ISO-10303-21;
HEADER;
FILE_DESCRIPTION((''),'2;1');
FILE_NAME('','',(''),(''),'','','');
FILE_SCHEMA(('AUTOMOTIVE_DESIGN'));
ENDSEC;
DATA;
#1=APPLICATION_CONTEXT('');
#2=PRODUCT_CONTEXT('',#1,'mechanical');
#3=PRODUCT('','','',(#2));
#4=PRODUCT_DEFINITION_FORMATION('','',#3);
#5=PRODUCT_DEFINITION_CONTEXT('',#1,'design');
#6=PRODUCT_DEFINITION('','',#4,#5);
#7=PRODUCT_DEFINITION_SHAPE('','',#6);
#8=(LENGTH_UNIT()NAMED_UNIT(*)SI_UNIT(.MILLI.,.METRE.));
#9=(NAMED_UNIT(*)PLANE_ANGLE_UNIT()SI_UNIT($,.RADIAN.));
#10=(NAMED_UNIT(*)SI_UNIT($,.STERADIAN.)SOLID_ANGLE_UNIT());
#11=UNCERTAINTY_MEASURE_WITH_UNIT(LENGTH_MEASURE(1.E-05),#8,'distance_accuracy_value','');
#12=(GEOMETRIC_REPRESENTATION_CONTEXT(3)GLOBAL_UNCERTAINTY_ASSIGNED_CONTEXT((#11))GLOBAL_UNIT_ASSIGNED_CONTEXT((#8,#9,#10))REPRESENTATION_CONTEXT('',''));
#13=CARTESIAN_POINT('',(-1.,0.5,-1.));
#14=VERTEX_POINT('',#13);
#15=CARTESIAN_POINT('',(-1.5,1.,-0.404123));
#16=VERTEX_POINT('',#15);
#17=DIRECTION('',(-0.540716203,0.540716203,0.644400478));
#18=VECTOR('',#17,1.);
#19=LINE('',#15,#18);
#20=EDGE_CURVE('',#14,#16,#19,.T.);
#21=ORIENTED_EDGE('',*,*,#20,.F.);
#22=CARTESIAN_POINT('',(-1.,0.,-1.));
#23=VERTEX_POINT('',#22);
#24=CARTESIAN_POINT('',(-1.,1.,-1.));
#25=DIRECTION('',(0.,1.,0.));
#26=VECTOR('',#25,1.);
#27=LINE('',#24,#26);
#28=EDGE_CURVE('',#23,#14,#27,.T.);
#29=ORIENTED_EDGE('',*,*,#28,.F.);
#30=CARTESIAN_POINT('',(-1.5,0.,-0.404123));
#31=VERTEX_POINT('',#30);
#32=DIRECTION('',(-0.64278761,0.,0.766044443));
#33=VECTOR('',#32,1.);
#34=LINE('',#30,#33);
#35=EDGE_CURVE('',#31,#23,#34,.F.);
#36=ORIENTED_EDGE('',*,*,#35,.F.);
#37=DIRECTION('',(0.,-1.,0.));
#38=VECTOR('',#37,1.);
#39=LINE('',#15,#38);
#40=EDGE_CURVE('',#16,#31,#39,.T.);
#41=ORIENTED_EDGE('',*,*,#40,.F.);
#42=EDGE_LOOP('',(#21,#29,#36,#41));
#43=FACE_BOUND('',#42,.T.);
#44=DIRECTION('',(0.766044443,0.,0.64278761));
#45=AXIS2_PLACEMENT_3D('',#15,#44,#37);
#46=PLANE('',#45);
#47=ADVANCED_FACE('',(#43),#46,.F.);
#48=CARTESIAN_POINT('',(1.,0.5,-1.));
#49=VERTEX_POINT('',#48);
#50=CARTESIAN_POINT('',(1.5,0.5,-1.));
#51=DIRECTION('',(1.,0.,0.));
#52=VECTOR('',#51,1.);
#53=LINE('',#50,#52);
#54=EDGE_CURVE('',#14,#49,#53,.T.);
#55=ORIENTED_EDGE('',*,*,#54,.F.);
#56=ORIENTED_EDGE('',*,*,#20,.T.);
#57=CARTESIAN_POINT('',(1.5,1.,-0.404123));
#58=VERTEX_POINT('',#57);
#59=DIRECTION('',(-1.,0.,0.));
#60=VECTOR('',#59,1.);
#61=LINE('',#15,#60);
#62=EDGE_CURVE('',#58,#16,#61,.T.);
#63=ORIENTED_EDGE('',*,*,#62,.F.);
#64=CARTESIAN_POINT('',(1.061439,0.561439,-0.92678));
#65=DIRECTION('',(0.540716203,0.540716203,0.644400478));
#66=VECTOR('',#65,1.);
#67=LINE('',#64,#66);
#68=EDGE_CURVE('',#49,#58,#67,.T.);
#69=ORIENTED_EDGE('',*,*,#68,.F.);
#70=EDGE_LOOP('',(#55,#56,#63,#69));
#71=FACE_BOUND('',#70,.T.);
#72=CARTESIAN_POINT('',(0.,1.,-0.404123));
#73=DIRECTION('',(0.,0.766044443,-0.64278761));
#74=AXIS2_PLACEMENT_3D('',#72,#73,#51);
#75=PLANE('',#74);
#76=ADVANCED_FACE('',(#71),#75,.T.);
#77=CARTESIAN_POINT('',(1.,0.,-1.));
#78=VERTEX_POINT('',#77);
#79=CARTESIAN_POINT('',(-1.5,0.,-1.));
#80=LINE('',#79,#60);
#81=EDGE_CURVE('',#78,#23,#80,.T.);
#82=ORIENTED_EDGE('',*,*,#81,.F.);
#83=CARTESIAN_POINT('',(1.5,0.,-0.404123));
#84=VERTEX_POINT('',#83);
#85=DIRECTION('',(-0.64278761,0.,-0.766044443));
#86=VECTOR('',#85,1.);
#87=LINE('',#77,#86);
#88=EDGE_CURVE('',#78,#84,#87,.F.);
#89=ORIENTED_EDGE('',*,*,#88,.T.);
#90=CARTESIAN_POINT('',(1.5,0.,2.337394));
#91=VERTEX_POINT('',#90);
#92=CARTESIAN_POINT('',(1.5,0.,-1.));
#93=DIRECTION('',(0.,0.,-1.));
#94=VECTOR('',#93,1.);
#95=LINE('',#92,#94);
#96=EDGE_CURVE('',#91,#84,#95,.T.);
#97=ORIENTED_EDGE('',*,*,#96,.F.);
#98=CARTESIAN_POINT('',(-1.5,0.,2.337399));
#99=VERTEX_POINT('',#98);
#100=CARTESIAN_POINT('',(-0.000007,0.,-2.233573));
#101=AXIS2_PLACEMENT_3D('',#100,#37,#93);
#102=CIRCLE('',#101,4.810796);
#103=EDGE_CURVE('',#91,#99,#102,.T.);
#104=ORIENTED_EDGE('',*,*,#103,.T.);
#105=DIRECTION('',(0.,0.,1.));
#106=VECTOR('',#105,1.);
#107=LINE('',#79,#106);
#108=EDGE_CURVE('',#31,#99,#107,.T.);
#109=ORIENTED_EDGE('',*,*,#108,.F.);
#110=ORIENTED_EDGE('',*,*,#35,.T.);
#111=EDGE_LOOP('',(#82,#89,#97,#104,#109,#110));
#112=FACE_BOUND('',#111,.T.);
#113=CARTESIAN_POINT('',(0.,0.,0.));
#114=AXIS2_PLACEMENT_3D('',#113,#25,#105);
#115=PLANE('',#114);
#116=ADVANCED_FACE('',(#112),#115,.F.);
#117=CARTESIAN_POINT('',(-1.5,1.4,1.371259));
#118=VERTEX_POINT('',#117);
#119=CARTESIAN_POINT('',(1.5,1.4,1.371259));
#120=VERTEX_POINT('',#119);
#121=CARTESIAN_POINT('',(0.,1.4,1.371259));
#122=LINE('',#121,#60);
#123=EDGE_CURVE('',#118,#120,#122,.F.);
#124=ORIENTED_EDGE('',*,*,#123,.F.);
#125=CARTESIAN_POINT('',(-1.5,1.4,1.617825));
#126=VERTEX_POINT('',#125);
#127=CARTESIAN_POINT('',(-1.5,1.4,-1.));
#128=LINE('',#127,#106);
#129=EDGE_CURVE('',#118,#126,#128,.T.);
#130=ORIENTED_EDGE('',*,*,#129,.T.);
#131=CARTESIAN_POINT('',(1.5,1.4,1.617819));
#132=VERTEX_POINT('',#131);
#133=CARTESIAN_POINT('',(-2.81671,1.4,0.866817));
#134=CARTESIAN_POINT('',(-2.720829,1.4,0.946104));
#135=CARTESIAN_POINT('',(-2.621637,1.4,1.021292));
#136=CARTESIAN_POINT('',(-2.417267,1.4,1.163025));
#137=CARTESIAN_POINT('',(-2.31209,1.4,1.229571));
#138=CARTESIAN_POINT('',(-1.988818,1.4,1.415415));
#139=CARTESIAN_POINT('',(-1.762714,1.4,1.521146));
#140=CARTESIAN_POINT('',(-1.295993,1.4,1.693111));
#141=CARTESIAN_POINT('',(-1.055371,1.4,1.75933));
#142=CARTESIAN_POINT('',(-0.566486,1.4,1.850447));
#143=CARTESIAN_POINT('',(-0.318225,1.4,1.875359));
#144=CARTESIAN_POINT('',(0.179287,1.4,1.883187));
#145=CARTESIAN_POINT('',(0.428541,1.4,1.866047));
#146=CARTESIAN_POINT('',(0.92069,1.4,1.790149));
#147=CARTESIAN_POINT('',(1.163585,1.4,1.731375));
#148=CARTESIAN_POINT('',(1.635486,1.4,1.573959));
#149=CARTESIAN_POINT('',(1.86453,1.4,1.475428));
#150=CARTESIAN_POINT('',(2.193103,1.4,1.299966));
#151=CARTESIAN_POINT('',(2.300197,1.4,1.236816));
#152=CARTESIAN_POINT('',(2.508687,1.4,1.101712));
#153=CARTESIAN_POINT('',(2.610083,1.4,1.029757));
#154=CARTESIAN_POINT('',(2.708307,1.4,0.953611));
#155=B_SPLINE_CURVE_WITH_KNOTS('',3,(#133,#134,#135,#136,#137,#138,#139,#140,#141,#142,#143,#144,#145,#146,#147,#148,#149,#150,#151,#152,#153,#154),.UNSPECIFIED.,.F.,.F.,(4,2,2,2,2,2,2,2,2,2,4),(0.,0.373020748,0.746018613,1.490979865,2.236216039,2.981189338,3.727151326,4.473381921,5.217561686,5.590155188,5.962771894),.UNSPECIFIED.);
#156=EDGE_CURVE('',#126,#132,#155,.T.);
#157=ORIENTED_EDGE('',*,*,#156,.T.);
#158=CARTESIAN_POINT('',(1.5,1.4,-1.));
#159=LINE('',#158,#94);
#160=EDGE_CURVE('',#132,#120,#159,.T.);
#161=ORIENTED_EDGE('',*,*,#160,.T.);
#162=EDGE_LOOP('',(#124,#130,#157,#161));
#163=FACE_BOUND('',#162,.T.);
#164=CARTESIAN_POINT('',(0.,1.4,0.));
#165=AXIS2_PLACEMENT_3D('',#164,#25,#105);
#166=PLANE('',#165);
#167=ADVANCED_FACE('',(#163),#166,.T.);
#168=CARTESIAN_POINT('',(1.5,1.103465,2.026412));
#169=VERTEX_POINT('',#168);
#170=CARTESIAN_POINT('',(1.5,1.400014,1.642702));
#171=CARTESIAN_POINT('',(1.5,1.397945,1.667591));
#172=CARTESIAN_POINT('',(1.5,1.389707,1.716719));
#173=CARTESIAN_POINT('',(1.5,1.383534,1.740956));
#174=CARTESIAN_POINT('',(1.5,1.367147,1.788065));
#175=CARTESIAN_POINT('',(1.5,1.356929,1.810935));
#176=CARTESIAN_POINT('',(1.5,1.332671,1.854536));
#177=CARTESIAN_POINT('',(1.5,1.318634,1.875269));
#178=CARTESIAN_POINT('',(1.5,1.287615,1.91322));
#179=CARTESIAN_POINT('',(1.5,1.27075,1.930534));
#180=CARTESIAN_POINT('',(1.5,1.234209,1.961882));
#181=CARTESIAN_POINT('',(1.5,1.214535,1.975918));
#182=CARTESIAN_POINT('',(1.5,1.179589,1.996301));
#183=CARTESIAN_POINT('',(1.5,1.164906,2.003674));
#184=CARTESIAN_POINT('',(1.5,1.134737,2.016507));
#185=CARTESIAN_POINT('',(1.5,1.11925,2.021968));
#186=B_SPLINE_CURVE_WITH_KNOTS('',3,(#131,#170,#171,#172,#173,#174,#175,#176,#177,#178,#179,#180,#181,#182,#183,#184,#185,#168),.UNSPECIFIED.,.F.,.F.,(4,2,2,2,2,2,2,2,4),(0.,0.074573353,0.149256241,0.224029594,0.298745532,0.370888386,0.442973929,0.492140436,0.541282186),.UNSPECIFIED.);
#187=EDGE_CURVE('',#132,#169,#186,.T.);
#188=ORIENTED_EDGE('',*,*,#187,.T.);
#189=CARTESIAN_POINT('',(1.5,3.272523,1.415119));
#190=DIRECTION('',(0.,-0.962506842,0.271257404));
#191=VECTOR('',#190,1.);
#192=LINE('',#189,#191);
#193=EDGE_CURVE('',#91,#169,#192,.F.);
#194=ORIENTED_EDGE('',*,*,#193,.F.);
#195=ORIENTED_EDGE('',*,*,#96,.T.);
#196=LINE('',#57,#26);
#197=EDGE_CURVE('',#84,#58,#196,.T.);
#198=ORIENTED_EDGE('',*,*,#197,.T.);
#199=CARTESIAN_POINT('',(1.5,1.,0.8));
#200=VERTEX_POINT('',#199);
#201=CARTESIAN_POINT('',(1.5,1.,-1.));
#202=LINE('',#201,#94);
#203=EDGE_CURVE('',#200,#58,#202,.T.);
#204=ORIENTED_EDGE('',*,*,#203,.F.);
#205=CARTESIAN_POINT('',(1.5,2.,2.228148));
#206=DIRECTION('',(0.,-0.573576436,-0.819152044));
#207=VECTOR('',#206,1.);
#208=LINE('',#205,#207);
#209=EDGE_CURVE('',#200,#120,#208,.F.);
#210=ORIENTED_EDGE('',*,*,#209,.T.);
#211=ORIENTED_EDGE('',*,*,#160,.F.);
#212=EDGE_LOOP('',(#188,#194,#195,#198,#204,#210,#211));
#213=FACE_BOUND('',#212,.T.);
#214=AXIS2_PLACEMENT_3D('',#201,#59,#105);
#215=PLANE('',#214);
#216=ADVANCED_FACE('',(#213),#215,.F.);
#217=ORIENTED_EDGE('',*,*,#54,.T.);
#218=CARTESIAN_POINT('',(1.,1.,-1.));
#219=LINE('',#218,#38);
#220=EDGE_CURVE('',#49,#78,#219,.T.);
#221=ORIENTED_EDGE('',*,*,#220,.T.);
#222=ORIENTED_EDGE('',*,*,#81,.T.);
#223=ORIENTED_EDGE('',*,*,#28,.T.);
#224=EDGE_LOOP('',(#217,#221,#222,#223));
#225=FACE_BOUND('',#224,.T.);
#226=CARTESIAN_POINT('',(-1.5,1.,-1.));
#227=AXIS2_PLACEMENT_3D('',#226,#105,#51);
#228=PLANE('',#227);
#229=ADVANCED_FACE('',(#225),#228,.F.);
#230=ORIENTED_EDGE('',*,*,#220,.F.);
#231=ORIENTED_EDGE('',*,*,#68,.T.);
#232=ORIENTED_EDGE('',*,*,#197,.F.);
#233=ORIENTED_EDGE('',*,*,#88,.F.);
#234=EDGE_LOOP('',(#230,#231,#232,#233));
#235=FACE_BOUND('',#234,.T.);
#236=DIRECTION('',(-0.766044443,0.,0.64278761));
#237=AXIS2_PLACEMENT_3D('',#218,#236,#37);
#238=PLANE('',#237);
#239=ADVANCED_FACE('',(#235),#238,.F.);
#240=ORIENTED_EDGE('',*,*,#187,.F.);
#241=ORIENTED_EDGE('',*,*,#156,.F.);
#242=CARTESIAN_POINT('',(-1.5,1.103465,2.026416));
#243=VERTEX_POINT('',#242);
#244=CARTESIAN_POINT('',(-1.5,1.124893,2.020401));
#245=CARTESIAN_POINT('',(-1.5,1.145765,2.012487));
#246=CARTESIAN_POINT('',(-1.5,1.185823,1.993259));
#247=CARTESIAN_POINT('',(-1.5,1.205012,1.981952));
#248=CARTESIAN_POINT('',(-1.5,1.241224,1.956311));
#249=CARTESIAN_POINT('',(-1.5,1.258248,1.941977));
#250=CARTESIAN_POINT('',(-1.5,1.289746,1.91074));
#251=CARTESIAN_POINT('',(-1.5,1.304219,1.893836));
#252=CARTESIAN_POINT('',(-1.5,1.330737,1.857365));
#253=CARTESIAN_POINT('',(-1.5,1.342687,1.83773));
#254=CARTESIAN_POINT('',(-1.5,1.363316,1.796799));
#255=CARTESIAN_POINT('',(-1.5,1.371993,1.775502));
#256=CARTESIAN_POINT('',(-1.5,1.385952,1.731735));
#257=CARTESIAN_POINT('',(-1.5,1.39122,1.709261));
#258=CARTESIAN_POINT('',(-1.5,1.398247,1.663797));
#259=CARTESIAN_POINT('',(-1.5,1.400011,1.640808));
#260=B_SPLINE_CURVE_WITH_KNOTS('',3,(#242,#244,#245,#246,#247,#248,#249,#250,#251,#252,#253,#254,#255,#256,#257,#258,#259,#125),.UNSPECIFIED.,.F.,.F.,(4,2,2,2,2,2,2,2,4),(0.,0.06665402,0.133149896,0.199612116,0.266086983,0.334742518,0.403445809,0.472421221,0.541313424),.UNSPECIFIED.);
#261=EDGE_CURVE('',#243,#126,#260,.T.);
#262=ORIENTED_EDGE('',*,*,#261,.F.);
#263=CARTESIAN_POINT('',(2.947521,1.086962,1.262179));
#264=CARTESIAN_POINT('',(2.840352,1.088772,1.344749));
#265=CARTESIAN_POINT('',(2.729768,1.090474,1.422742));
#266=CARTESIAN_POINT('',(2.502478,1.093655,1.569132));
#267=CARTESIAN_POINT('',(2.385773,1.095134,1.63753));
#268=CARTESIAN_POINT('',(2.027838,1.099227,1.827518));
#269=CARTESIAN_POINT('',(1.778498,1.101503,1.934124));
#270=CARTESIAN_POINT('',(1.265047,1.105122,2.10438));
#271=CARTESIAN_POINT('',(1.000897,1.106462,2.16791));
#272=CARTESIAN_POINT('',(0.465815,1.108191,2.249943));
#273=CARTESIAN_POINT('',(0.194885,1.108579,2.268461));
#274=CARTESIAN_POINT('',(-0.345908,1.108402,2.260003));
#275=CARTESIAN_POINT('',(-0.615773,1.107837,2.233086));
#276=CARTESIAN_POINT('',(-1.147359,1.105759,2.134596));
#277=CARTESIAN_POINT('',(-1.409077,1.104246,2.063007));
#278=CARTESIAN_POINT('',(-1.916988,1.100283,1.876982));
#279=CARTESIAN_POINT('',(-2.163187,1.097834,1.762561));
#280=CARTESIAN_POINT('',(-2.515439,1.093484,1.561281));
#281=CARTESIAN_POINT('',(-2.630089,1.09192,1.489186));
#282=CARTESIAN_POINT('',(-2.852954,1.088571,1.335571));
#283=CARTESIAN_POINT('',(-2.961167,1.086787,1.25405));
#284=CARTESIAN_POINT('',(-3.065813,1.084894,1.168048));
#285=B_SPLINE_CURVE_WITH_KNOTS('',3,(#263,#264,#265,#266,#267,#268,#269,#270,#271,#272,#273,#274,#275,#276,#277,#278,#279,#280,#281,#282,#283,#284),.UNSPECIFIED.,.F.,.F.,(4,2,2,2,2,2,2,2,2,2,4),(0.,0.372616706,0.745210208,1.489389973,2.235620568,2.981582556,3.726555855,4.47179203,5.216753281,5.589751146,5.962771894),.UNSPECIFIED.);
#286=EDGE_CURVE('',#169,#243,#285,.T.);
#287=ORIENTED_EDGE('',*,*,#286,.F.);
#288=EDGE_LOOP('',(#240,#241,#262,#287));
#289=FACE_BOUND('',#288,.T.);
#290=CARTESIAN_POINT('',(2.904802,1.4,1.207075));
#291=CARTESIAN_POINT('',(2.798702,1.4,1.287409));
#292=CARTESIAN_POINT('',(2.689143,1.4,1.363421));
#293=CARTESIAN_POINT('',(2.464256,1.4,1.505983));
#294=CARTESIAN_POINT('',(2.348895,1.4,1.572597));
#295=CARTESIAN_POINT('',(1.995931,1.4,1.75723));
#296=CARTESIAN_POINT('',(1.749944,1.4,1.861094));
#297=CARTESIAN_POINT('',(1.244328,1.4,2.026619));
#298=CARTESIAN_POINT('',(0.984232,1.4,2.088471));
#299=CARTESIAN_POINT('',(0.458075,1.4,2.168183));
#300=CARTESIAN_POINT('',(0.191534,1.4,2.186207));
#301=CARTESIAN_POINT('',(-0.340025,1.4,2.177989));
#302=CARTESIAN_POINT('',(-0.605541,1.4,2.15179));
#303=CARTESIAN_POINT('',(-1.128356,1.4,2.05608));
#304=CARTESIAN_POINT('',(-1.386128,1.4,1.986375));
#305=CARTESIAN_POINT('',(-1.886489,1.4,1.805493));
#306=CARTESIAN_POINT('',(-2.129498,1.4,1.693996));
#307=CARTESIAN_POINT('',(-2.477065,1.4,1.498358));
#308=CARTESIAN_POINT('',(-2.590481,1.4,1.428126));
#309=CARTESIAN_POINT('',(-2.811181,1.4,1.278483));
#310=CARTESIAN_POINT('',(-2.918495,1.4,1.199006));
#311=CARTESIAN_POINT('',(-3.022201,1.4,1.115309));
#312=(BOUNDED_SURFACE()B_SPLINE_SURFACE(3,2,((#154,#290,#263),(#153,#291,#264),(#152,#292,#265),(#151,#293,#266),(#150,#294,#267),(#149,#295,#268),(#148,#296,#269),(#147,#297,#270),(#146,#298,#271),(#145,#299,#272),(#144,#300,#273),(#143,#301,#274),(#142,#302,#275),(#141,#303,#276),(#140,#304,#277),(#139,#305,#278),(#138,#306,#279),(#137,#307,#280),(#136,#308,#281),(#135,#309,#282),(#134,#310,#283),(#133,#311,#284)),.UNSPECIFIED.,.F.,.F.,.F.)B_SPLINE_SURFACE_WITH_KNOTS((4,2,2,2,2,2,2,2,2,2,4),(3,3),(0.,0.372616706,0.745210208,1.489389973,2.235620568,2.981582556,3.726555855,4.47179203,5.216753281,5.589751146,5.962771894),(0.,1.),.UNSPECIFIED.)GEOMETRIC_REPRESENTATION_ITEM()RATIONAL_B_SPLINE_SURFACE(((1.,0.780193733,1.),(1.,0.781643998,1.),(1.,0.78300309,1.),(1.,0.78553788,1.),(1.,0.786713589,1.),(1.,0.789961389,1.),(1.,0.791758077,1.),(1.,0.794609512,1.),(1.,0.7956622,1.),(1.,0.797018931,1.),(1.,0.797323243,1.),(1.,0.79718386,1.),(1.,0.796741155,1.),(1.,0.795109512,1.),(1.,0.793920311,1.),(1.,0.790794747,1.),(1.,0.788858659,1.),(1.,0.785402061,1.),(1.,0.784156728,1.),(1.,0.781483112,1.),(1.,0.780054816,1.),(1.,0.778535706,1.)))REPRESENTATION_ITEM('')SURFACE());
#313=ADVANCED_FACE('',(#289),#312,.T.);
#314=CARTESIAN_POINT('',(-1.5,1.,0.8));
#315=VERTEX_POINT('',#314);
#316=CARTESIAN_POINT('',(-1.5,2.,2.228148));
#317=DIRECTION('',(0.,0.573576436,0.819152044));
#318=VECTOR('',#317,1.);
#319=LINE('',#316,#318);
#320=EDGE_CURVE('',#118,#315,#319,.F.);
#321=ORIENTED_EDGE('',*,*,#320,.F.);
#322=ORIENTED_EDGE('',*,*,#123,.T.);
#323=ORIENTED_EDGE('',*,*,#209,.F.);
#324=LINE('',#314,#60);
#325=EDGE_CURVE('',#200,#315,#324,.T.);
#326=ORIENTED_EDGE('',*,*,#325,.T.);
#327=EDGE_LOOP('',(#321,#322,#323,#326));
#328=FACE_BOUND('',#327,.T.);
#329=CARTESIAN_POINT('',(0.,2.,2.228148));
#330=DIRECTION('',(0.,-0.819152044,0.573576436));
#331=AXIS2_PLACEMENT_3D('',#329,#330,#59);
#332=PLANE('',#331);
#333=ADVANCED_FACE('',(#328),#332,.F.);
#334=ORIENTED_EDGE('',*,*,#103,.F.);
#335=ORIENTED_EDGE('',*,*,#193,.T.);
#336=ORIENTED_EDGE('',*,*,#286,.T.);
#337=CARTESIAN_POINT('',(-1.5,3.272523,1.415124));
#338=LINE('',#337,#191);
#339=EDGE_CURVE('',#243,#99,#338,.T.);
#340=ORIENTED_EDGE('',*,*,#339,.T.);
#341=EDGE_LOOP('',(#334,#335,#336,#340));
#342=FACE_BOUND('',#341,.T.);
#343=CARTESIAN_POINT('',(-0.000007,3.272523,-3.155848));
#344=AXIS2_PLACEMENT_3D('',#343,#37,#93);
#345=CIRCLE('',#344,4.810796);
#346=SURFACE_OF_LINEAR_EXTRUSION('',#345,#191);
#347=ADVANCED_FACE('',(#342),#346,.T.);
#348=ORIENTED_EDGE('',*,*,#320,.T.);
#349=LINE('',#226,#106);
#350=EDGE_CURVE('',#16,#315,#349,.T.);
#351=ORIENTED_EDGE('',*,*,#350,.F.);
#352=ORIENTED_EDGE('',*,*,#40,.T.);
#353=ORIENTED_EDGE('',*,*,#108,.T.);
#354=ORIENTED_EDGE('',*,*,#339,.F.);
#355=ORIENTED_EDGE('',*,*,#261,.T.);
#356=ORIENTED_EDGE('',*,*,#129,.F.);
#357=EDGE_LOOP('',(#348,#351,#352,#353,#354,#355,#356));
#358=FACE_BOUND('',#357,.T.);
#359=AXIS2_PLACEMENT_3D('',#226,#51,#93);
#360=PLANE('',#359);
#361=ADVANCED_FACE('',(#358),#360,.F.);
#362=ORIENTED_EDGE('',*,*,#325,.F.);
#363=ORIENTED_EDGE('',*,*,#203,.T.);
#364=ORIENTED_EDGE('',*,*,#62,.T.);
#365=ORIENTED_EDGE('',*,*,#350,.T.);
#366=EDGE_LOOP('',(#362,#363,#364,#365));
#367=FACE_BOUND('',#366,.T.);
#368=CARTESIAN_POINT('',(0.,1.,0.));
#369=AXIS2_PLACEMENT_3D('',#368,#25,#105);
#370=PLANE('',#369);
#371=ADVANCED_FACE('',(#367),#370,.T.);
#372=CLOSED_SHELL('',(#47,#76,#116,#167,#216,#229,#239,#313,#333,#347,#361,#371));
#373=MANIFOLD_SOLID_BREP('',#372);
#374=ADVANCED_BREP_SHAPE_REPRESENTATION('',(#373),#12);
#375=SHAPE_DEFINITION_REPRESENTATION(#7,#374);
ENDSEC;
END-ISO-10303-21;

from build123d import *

# Parameters (mm, degrees)
SKETCH_1_W          = 3
SKETCH_1_H          = 3.8
EXTRUDE_1_DEPTH     = 1
SKETCH_2_W          = 3
SKETCH_2_H          = 2
EXTRUDE_2_DEPTH     = 1
CHAMFER_1_SIZE      = 0.5
CHAMFER_1_SIZE2     = 0.595876796
CHAMFER_3_SIZE      = 1
CHAMFER_3_SIZE_2    = 1.428148007
CUT_EXTRUDE_1_DEPTH = 3.4
CUT_EXTRUDE_START   = 0.4
SKETCH_7_W          = 5.415057917
SKETCH_7_H          = 3.835149715
CUT_EXTRUDE_2_DEPTH = 3.4
FILLET_1_R          = 0.4


with BuildPart() as part:
    # 草图1 → 凸台-拉伸1 (new body)
    with BuildSketch(Plane(origin=(0, 0, 0), x_dir=(1, 0, 0), z_dir=(0, 1, 0))):
        with Locations((0, -0.9)):
            Rectangle(SKETCH_1_W, SKETCH_1_H)
    extrude(amount=EXTRUDE_1_DEPTH)

    # 草图2 → 凸台-拉伸2 (add)
    with BuildSketch(Plane(origin=(0, 1, 0), x_dir=(1, 0, 0), z_dir=(0, 1, 0))):
        with Locations((0, -1.8)):
            Rectangle(SKETCH_2_W, SKETCH_2_H)
    extrude(amount=EXTRUDE_2_DEPTH)

    # 倒角1
    chamfer_1_edges = [part.edges().sort_by_distance(p)[0] for p in [
        (0, 1, -1),
        (-1.5, 0.5, -1),
        (1.5, 0.5, -1),
    ]]
    chamfer_1_side = [part.faces().sort_by_distance(p)[0] for p in [
        (0, 0.5, -1),
    ]]
    chamfer(chamfer_1_edges, length=CHAMFER_1_SIZE, length2=CHAMFER_1_SIZE2, reference=chamfer_1_side[0])

    # 倒角3
    # the kernel refuses this chamfer: 1.428148007, 1 mm, written as the material it takes off along each edge
    with BuildSketch(Plane(origin=(5.18826682, 2, 0.8), x_dir=(0, -0.9989750717851554, -0.04526373771402124), z_dir=(-1, 0, 0))) as chamfer_3_piece_1_section:
        Polygon((CHAMFER_3_SIZE * 0.998975071785, CHAMFER_3_SIZE * 0.045263737714), (-CHAMFER_3_SIZE_2 * 0.0452637377058, CHAMFER_3_SIZE_2 * 0.998975071605), (0, 0), align=None)
    chamfer_3_piece_1 = extrude(amount=10.37653364, mode=Mode.PRIVATE)
    chamfer_3_piece_1 = split(chamfer_3_piece_1, bisect_by=Plane(origin=(0, 1, 1.276872226), z_dir=(0, 1, 0)), keep=Keep.TOP, mode=Mode.PRIVATE)
    add(chamfer_3_piece_1, mode=Mode.SUBTRACT)

    # 草图4 → 切除-拉伸1 (cut, along a direction that is not the sketch's normal)
    with BuildSketch(Plane.XZ):
        with BuildLine():
            Line((1.59999292, 2.303360359), (2.090500244, 2.793867684))
            Line((2.090500244, 2.793867684), (1.735885254, 4.087234068))
            Line((1.735885254, 4.087234068), (1.71936645, 4.089830446))
            Line((1.71936645, 4.089830446), (-1.672891968, 4.089830446))
            Line((-1.672891968, 4.089830446), (-1.91054636, 3.486179043))
            Line((-1.91054636, 3.486179043), (-2.191031794, 2.570257584))
            Line((-2.191031794, 2.570257584), (-1.60000708, 2.303360359))
            ThreePointArc((-1.60000708, 2.303360359), (-7.08e-06, 2.577223661), (1.59999292, 2.303360359))
        make_face()
    extrude(amount=-CUT_EXTRUDE_1_DEPTH, dir=(0, -0.9625068420560824, 0.27125740357680156), mode=Mode.SUBTRACT)

    # 草图7 → 切除-拉伸2 (cut)
    with BuildSketch(Plane(origin=(0, 1, 0), x_dir=(1, 0, 0), z_dir=(0, 1, 0)).offset(CUT_EXTRUDE_START)):
        with Locations((0.008843871, -1.614836942)):
            Rectangle(SKETCH_7_W, SKETCH_7_H)
    extrude(amount=CUT_EXTRUDE_2_DEPTH, mode=Mode.SUBTRACT)

    # 圆角1
    fillet_1_edges = [part.edges().sort_by_distance(p)[0] for p in [
        (3.79e-07, 1.4, 2.182670242),
    ]]
    fillet(fillet_1_edges, radius=FILLET_1_R)


solid = part.part
